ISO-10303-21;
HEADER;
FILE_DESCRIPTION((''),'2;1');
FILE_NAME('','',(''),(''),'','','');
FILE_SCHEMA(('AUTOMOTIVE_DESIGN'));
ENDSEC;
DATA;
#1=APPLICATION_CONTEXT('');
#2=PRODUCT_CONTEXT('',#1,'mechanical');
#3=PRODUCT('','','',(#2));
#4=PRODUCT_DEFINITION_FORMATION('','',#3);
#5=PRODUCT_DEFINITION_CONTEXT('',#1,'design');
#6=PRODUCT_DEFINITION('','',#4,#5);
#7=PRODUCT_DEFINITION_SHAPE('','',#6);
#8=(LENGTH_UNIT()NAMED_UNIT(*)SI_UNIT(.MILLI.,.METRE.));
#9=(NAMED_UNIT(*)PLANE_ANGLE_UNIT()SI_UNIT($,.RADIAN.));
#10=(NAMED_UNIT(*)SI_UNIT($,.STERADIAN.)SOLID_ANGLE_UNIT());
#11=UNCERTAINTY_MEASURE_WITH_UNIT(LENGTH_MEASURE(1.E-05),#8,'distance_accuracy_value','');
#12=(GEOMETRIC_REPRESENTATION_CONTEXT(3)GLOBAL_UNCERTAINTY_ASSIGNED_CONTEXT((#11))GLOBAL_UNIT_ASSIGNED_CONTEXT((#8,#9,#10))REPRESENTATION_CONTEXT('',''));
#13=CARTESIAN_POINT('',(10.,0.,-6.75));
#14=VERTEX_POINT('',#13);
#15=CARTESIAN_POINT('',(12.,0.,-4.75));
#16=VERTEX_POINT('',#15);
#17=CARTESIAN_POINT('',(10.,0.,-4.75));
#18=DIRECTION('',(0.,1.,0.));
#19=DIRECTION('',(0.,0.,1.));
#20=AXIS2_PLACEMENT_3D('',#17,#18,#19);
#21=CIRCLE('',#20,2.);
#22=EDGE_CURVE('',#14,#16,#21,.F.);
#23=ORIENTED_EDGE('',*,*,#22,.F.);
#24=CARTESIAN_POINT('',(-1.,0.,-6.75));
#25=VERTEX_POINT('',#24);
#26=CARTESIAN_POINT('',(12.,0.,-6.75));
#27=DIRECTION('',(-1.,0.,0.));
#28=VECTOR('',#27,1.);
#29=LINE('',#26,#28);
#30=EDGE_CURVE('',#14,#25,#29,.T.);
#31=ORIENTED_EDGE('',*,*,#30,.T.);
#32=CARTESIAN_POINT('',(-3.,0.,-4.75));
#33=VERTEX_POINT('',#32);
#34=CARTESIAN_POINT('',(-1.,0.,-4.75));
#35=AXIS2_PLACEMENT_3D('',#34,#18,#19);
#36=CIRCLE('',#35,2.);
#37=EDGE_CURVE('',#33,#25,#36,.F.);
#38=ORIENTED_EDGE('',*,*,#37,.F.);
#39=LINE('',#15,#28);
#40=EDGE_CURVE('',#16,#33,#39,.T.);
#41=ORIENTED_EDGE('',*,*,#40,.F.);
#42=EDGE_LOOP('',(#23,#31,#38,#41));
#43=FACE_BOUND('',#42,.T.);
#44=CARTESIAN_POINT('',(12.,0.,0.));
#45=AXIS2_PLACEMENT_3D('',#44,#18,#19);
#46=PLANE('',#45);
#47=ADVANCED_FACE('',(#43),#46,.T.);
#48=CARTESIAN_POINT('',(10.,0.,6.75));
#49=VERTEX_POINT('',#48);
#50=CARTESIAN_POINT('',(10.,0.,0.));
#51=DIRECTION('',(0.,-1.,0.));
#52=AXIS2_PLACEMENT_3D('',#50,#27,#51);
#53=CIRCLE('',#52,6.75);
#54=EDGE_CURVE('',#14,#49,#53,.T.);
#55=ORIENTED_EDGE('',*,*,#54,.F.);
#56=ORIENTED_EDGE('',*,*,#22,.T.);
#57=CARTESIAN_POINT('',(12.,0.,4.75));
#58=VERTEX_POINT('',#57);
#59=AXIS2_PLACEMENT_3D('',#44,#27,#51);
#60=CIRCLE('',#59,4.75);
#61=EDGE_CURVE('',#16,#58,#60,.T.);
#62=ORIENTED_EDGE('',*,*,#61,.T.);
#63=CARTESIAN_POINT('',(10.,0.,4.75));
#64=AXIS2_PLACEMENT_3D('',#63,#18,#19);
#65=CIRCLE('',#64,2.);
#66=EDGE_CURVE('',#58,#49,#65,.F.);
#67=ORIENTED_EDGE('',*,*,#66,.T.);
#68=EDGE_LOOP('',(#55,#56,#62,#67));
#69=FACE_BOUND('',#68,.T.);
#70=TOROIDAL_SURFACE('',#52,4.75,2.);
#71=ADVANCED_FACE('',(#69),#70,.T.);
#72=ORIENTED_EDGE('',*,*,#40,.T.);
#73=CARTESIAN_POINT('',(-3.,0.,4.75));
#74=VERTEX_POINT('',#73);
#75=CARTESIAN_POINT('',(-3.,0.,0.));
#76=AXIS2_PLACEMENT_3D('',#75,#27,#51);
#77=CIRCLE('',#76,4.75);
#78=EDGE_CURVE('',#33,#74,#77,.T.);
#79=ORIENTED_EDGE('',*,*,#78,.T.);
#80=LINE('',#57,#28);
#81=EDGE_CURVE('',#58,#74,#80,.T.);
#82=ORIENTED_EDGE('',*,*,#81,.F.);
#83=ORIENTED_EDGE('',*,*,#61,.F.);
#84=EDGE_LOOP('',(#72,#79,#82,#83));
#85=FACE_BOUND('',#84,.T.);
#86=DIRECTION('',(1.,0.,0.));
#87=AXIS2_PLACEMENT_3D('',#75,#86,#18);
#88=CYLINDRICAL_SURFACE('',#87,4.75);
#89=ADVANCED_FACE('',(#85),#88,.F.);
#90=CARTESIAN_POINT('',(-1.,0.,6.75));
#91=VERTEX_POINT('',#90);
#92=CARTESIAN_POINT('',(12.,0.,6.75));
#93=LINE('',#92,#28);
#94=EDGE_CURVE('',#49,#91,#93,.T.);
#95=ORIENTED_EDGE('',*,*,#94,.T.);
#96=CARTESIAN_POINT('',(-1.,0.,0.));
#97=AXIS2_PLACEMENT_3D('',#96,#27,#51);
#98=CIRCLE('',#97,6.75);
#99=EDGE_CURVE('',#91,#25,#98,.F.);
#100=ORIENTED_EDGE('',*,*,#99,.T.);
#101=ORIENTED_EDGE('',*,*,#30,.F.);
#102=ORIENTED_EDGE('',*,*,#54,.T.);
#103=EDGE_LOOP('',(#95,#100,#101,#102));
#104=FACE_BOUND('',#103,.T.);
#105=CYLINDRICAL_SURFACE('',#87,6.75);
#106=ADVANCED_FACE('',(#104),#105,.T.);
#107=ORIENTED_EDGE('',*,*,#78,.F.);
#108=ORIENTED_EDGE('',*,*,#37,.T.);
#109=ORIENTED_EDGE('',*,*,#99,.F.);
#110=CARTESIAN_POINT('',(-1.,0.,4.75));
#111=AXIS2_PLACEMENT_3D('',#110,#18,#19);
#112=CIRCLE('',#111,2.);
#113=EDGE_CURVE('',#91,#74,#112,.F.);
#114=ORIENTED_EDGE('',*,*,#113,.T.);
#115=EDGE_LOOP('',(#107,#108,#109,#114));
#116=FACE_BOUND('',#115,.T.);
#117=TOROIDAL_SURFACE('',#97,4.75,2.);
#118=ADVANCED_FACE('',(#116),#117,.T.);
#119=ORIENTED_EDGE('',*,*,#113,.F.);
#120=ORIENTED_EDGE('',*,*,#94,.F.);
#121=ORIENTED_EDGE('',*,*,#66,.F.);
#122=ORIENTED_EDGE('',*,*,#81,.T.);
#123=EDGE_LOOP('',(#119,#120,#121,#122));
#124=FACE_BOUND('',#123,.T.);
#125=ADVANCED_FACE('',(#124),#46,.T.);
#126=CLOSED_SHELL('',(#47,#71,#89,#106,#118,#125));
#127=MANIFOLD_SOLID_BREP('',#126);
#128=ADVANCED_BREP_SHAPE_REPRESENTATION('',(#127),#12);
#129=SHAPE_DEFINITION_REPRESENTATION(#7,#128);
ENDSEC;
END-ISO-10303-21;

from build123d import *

# Parameters (mm, degrees)
SKETCH4_R               = 6.75
SKETCH4_R_2             = 4.75
BOSS_EXTRUDE4_DEPTH     = 15
FILLET3_R               = 2
FILLET4_R               = 2
CUT_EXTRUDE1_DEPTH      = 16.333786269
CUT_EXTRUDE1_DEPTH_BACK = 16.333786269


with BuildPart() as part:
    # Sketch4 → Boss-Extrude4 (new body)
    with BuildSketch(Plane.ZY.offset(-12)):
        with Locations(Location((0, 0, 0), (0, 0, 270))):
            Circle(SKETCH4_R)
        with Locations(Location((0, 0, 0), (0, 0, 270))):
            Circle(SKETCH4_R_2, mode=Mode.SUBTRACT)
    extrude(amount=BOSS_EXTRUDE4_DEPTH)

    # Fillet3
    fillet3_edges = [part.edges().sort_by_distance(p)[0] for p in [
        (12, 6.75, 0),
    ]]
    fillet(fillet3_edges, radius=FILLET3_R - 0.0001)  # a hair under: the kernel refuses the full size

    # Fillet4
    fillet4_edges = [part.edges().sort_by_distance(p)[0] for p in [
        (-3, 6.75, 0),
    ]]
    fillet(fillet4_edges, radius=FILLET4_R - 0.0001)  # a hair under: the kernel refuses the full size

    # Sketch5 → Cut-Extrude1 (cut, two sides: drawn at the far end of the back side and taken through both)
    with BuildSketch(Plane(origin=(0, 0, 0), x_dir=(0, 0, -1), z_dir=(1, 0, 0)).offset(-CUT_EXTRUDE1_DEPTH_BACK)):
        with BuildLine():
            ThreePointArc((6.75, 0), (0, 6.75), (-6.75, 0))
            Line((-6.75, 0), (-4.75, 0))
            ThreePointArc((-4.75, 0), (0, 4.75), (4.75, 0))
            Line((4.75, 0), (6.75, 0))
        make_face()
    extrude(amount=CUT_EXTRUDE1_DEPTH + CUT_EXTRUDE1_DEPTH_BACK, mode=Mode.SUBTRACT)


solid = part.part
